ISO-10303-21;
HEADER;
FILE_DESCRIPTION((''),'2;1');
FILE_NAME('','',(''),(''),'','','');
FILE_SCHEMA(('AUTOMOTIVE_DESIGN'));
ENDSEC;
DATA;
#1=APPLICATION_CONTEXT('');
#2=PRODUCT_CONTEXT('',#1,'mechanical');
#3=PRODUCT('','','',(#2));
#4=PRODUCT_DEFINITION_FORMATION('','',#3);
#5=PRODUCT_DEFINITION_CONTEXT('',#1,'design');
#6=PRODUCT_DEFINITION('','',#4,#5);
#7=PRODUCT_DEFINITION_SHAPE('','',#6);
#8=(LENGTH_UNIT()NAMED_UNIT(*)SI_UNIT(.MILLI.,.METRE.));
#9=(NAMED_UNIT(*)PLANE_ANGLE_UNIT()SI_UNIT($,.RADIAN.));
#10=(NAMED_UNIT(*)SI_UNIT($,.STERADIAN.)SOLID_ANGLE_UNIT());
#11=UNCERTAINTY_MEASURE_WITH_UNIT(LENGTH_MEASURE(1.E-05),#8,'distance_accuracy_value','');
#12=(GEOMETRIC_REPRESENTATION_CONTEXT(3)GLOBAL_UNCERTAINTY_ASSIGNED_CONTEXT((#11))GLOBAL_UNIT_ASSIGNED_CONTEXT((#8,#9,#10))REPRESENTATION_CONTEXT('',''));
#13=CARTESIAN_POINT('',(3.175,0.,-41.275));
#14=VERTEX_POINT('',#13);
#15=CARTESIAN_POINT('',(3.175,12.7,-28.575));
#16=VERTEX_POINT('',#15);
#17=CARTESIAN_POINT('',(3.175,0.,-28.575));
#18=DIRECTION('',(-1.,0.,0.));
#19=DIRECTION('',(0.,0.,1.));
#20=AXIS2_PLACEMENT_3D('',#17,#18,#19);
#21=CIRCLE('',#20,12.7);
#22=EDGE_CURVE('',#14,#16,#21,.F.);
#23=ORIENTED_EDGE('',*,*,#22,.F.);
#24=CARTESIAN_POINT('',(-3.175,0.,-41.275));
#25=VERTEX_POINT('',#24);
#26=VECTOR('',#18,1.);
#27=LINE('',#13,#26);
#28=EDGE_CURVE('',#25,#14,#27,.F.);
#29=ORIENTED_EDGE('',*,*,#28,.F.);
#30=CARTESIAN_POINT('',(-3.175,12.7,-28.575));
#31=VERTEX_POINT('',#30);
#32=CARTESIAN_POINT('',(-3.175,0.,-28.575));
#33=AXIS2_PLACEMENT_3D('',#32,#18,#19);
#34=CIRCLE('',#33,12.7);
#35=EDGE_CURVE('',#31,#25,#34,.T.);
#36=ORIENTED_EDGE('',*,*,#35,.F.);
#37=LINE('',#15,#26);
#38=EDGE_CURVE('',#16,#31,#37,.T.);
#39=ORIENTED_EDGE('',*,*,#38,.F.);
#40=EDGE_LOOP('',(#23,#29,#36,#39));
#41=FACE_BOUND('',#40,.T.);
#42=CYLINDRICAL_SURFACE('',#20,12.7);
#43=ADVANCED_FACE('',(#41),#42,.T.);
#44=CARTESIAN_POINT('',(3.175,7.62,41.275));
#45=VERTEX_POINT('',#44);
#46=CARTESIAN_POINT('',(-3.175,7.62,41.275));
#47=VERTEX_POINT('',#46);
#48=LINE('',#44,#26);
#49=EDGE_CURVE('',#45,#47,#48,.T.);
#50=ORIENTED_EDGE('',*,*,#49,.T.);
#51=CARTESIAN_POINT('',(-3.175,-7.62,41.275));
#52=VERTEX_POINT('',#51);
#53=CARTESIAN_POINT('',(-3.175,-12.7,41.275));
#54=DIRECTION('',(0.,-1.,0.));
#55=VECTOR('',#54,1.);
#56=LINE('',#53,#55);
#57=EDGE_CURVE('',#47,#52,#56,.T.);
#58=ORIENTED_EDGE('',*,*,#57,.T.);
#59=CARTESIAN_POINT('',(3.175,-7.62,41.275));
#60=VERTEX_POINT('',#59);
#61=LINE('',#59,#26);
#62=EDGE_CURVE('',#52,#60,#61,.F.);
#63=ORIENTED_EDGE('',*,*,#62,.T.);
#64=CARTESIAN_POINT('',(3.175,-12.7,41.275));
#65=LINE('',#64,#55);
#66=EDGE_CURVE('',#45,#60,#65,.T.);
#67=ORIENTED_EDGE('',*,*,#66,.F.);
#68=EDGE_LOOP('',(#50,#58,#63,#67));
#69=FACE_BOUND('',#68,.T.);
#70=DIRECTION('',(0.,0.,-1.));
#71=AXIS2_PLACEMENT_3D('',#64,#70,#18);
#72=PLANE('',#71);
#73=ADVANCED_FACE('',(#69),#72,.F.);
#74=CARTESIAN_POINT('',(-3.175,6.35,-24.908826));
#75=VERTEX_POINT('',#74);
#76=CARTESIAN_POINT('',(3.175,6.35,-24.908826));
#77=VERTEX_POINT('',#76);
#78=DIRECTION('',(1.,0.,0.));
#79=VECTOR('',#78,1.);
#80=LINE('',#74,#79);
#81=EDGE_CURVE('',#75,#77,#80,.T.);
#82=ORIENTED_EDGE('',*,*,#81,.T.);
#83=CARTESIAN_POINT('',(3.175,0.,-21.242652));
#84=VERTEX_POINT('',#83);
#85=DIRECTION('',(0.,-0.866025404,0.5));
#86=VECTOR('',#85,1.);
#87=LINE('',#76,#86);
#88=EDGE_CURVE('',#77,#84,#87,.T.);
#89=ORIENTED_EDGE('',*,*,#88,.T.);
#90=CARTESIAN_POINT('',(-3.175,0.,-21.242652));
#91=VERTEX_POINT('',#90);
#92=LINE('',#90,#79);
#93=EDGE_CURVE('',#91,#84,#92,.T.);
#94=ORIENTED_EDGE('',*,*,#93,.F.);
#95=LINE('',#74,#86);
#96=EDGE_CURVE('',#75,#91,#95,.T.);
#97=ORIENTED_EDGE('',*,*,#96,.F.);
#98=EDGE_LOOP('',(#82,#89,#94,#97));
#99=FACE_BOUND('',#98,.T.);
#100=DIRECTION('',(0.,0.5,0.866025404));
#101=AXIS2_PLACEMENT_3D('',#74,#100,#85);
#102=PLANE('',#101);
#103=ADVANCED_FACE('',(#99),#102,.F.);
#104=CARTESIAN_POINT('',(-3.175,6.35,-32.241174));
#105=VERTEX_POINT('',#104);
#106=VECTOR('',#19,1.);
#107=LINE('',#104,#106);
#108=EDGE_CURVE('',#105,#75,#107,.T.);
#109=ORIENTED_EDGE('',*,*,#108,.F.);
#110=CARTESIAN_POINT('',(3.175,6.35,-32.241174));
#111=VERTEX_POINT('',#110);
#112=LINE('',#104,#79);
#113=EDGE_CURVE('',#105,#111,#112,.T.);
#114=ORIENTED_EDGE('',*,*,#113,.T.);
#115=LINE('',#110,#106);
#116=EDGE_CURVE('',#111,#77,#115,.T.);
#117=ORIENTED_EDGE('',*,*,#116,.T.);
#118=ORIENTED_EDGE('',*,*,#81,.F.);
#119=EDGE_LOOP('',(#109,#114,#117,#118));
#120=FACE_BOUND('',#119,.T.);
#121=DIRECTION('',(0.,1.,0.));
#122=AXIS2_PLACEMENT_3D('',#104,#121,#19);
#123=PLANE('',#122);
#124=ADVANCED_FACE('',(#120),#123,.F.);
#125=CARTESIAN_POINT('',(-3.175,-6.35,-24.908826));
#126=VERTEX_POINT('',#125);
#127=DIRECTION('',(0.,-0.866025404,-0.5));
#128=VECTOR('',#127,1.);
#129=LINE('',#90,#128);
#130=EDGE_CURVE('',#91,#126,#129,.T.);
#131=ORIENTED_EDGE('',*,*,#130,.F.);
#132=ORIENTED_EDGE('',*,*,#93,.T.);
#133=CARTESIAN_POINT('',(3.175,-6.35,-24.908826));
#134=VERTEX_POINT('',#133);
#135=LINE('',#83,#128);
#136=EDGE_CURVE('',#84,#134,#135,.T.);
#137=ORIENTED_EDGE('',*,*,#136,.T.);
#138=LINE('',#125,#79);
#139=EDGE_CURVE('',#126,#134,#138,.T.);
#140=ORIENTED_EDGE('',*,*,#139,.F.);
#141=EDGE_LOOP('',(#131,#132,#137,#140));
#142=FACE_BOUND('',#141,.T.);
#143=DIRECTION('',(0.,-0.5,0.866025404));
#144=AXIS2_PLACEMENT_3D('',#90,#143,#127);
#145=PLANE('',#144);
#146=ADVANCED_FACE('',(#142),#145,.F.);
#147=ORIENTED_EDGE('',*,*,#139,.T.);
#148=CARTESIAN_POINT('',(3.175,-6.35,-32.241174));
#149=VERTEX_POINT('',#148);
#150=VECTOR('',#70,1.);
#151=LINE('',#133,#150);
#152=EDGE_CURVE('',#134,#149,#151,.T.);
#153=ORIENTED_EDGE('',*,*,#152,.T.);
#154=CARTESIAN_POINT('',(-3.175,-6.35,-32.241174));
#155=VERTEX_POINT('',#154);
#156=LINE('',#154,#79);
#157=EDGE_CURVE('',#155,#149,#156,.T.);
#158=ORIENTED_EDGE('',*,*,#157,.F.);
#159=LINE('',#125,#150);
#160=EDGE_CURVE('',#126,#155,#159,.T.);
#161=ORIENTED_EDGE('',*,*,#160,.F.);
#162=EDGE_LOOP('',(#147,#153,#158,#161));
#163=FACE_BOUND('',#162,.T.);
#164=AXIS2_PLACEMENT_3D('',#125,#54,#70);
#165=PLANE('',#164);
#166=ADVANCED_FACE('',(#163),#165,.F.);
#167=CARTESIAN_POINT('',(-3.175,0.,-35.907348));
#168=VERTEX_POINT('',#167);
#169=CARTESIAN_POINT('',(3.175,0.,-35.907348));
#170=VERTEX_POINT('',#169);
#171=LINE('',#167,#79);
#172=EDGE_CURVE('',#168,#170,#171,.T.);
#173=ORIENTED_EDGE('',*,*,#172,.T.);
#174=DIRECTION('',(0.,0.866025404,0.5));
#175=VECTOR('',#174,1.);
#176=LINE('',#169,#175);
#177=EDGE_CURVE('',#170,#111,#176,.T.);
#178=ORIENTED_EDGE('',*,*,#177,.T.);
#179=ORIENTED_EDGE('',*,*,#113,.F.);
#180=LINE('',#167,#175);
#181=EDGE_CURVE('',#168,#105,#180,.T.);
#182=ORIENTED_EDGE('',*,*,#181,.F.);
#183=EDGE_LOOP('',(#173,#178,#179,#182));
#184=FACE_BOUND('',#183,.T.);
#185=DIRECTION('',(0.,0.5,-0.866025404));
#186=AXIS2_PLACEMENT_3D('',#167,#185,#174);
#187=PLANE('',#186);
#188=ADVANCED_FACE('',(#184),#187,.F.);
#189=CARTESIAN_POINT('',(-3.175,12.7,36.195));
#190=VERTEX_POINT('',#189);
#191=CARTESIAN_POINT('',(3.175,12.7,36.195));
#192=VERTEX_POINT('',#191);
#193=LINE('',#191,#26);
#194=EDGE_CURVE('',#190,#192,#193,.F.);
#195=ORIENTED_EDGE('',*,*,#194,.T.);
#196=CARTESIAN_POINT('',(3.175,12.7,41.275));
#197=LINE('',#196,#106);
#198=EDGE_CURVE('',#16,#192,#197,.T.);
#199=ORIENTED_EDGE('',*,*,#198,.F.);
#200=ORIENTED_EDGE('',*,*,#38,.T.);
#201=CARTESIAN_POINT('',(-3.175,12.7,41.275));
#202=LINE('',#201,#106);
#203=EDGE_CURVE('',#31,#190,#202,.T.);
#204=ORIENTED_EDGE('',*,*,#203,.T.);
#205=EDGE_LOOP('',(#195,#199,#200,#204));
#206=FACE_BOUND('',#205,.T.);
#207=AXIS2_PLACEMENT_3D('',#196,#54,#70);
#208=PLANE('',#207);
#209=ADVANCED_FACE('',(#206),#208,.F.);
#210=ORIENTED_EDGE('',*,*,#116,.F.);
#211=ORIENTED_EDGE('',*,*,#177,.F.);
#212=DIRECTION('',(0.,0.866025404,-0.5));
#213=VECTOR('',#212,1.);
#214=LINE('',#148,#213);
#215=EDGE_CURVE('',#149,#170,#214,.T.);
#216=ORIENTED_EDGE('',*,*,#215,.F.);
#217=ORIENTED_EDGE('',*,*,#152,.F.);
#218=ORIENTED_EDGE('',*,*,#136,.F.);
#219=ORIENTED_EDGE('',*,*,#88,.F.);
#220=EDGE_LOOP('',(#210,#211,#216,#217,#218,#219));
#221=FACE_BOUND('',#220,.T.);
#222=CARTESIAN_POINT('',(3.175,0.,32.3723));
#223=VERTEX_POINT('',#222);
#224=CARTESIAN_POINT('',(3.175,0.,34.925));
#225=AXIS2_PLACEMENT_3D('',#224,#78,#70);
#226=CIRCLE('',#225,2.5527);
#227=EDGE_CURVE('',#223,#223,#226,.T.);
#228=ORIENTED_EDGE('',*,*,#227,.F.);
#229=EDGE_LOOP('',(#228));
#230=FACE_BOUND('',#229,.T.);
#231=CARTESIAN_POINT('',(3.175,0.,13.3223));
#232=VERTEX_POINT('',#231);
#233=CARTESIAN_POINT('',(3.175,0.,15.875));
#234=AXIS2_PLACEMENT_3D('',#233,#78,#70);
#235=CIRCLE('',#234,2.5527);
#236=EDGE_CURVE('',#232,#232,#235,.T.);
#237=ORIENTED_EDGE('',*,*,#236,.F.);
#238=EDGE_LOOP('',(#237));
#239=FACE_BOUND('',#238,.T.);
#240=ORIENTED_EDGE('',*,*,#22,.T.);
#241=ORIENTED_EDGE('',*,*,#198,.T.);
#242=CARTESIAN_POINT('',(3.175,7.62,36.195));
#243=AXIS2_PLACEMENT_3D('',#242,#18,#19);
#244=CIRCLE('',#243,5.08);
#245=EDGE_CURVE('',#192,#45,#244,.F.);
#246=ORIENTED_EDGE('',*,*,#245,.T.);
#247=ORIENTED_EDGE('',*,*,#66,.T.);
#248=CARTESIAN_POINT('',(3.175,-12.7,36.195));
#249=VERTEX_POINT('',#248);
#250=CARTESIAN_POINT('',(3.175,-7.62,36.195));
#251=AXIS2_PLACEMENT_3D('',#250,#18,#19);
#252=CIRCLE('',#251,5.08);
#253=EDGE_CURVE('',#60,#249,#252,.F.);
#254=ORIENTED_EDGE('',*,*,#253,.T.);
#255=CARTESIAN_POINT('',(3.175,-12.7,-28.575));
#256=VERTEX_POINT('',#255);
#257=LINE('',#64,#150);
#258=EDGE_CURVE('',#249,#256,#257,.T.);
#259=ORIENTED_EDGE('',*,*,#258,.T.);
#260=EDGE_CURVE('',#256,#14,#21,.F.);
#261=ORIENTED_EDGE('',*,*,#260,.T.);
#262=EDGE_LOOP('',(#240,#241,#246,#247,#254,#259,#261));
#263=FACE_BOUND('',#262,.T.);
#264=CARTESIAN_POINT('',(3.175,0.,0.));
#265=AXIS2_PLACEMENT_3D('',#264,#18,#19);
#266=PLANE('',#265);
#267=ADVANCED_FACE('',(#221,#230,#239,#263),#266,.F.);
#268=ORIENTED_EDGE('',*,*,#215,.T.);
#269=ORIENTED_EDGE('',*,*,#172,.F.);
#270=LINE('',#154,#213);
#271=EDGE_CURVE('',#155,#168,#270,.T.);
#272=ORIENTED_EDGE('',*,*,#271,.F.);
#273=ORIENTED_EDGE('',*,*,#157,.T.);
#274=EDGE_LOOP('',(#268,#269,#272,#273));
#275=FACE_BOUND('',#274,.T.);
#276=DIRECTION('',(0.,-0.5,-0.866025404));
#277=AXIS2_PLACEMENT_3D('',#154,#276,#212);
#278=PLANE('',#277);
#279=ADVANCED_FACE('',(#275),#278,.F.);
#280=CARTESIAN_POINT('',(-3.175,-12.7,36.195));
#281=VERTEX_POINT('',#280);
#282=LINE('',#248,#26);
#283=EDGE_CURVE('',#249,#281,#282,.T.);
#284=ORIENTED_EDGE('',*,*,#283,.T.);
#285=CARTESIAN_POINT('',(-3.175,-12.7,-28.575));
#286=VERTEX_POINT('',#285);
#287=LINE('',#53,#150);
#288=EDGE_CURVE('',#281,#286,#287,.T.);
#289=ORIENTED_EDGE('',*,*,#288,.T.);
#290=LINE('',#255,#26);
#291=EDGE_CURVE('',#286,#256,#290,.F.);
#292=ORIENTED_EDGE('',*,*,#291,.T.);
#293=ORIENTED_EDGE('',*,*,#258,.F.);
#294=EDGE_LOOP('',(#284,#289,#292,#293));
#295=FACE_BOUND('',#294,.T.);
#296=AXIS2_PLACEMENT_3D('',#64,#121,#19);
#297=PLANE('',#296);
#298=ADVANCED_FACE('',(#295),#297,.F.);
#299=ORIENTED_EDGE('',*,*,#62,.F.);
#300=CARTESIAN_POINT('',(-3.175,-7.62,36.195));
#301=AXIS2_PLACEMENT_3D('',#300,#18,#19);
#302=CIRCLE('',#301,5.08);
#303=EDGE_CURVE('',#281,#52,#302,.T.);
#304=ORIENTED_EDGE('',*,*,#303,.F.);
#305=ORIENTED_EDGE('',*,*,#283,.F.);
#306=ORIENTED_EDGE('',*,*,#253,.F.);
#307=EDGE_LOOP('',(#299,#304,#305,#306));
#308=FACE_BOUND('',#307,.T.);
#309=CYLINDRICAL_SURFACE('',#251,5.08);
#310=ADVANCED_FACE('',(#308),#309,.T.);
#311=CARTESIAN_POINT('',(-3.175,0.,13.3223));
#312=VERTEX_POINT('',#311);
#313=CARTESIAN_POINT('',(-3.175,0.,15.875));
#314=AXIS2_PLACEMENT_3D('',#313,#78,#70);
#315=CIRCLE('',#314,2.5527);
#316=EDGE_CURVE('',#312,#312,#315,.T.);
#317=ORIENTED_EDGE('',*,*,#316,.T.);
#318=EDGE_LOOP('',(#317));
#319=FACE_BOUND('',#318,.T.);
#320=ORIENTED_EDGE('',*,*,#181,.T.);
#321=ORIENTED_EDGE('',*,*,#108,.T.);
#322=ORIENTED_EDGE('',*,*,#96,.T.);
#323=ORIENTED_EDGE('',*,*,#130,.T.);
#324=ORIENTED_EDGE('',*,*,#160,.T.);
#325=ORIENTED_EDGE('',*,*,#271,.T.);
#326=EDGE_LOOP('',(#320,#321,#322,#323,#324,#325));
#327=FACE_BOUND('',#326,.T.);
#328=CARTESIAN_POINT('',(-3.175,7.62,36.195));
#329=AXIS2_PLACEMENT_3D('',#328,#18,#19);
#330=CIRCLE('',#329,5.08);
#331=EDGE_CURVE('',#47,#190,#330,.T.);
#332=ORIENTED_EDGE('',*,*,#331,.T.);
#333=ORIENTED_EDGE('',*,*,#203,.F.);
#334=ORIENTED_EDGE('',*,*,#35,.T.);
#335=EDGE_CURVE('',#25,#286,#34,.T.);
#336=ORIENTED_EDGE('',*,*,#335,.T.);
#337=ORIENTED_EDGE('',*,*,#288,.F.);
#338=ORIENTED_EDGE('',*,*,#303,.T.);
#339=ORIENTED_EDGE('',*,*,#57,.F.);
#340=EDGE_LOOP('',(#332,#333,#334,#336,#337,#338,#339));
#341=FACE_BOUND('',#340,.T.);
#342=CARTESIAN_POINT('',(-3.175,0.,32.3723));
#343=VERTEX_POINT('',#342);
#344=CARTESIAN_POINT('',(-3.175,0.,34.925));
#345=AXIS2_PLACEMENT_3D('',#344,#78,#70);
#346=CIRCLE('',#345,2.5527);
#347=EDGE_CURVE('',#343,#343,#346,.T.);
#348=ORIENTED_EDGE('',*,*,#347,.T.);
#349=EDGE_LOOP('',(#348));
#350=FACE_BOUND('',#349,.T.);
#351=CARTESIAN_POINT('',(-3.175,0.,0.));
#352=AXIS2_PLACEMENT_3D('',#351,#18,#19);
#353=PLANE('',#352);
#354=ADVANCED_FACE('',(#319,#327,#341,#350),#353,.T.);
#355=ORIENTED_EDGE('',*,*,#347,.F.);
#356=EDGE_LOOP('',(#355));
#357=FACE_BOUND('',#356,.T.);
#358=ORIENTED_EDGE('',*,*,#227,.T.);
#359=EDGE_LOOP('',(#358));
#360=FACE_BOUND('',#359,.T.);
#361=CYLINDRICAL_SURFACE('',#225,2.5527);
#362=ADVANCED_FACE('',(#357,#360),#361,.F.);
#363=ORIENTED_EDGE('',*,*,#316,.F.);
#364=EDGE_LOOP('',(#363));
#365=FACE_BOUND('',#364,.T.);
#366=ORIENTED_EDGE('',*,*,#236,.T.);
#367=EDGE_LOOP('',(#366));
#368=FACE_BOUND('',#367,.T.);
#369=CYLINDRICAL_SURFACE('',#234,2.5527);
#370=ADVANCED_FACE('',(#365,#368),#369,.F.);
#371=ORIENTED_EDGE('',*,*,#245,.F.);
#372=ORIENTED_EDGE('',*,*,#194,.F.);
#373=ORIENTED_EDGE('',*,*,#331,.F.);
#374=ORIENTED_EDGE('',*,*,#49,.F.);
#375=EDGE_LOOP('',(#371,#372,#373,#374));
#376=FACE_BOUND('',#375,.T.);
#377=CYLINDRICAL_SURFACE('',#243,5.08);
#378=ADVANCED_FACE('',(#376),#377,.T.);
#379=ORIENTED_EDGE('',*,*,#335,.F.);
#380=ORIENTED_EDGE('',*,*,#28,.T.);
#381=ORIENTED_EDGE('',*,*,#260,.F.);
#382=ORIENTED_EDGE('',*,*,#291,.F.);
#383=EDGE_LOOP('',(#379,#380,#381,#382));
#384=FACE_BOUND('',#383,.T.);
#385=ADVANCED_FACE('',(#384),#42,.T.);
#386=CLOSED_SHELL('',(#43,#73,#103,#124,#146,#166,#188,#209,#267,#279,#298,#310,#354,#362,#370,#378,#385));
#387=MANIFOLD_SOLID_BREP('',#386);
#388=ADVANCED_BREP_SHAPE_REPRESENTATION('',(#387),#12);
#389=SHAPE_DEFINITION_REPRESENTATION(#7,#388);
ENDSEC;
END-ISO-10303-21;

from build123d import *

# Parameters (mm, degrees)
SKETCH1_W              = 82.55
SKETCH1_H              = 25.4
BOSS_EXTRUDE1_DEPTH    = 3.175
FILLET1_R              = 12.7
F_10_CLEARANCE_HOLE1_D = 5.1054
FILLET2_R              = 5.08
CUT_EXTRUDE1_DEPTH     = 44.649033494


with BuildPart() as part:
    # Sketch1 → Boss-Extrude1 (new, symmetric)
    with BuildSketch(Plane(origin=(0, 0, 0), x_dir=(0, 0, -1), z_dir=(1, 0, 0))):
        Rectangle(SKETCH1_W, SKETCH1_H)
    extrude(amount=BOSS_EXTRUDE1_DEPTH, both=True)

    # Fillet1
    fillet1_edges = [part.edges().sort_by_distance(p)[0] for p in [
        (0, -12.7, -41.275),
        (0, 12.7, -41.275),
    ]]
    fillet(fillet1_edges, radius=FILLET1_R - 0.0001)  # a hair under: the kernel refuses the full size

    # #10 Clearance Hole1 (through all)
    with Locations(Plane(origin=(3.175, 6.272913445, 168.827028559), x_dir=(0, 0, -1), z_dir=(1, 0, 0))):
        with Locations((152.952028559, -6.272913445), (133.902028559, -6.272913445)):
            Hole(F_10_CLEARANCE_HOLE1_D / 2)

    # Fillet2
    fillet2_edges = [part.edges().sort_by_distance(p)[0] for p in [
        (0, -12.7, 41.275),
        (0, 12.7, 41.275),
    ]]
    fillet(fillet2_edges, radius=FILLET2_R)

    # Sketch7 → Cut-Extrude1 (cut, through all)
    with BuildSketch(Plane(origin=(3.175, 0, 0), x_dir=(0, 0, -1), z_dir=(1, 0, 0))):
        Polygon((32.241174209, 6.35), (24.908825791, 6.35), (21.242651581, 0), (24.908825791, -6.35), (32.241174209, -6.35), (35.907348419, 0), align=None)
    extrude(amount=-CUT_EXTRUDE1_DEPTH, mode=Mode.SUBTRACT)


solid = part.part
